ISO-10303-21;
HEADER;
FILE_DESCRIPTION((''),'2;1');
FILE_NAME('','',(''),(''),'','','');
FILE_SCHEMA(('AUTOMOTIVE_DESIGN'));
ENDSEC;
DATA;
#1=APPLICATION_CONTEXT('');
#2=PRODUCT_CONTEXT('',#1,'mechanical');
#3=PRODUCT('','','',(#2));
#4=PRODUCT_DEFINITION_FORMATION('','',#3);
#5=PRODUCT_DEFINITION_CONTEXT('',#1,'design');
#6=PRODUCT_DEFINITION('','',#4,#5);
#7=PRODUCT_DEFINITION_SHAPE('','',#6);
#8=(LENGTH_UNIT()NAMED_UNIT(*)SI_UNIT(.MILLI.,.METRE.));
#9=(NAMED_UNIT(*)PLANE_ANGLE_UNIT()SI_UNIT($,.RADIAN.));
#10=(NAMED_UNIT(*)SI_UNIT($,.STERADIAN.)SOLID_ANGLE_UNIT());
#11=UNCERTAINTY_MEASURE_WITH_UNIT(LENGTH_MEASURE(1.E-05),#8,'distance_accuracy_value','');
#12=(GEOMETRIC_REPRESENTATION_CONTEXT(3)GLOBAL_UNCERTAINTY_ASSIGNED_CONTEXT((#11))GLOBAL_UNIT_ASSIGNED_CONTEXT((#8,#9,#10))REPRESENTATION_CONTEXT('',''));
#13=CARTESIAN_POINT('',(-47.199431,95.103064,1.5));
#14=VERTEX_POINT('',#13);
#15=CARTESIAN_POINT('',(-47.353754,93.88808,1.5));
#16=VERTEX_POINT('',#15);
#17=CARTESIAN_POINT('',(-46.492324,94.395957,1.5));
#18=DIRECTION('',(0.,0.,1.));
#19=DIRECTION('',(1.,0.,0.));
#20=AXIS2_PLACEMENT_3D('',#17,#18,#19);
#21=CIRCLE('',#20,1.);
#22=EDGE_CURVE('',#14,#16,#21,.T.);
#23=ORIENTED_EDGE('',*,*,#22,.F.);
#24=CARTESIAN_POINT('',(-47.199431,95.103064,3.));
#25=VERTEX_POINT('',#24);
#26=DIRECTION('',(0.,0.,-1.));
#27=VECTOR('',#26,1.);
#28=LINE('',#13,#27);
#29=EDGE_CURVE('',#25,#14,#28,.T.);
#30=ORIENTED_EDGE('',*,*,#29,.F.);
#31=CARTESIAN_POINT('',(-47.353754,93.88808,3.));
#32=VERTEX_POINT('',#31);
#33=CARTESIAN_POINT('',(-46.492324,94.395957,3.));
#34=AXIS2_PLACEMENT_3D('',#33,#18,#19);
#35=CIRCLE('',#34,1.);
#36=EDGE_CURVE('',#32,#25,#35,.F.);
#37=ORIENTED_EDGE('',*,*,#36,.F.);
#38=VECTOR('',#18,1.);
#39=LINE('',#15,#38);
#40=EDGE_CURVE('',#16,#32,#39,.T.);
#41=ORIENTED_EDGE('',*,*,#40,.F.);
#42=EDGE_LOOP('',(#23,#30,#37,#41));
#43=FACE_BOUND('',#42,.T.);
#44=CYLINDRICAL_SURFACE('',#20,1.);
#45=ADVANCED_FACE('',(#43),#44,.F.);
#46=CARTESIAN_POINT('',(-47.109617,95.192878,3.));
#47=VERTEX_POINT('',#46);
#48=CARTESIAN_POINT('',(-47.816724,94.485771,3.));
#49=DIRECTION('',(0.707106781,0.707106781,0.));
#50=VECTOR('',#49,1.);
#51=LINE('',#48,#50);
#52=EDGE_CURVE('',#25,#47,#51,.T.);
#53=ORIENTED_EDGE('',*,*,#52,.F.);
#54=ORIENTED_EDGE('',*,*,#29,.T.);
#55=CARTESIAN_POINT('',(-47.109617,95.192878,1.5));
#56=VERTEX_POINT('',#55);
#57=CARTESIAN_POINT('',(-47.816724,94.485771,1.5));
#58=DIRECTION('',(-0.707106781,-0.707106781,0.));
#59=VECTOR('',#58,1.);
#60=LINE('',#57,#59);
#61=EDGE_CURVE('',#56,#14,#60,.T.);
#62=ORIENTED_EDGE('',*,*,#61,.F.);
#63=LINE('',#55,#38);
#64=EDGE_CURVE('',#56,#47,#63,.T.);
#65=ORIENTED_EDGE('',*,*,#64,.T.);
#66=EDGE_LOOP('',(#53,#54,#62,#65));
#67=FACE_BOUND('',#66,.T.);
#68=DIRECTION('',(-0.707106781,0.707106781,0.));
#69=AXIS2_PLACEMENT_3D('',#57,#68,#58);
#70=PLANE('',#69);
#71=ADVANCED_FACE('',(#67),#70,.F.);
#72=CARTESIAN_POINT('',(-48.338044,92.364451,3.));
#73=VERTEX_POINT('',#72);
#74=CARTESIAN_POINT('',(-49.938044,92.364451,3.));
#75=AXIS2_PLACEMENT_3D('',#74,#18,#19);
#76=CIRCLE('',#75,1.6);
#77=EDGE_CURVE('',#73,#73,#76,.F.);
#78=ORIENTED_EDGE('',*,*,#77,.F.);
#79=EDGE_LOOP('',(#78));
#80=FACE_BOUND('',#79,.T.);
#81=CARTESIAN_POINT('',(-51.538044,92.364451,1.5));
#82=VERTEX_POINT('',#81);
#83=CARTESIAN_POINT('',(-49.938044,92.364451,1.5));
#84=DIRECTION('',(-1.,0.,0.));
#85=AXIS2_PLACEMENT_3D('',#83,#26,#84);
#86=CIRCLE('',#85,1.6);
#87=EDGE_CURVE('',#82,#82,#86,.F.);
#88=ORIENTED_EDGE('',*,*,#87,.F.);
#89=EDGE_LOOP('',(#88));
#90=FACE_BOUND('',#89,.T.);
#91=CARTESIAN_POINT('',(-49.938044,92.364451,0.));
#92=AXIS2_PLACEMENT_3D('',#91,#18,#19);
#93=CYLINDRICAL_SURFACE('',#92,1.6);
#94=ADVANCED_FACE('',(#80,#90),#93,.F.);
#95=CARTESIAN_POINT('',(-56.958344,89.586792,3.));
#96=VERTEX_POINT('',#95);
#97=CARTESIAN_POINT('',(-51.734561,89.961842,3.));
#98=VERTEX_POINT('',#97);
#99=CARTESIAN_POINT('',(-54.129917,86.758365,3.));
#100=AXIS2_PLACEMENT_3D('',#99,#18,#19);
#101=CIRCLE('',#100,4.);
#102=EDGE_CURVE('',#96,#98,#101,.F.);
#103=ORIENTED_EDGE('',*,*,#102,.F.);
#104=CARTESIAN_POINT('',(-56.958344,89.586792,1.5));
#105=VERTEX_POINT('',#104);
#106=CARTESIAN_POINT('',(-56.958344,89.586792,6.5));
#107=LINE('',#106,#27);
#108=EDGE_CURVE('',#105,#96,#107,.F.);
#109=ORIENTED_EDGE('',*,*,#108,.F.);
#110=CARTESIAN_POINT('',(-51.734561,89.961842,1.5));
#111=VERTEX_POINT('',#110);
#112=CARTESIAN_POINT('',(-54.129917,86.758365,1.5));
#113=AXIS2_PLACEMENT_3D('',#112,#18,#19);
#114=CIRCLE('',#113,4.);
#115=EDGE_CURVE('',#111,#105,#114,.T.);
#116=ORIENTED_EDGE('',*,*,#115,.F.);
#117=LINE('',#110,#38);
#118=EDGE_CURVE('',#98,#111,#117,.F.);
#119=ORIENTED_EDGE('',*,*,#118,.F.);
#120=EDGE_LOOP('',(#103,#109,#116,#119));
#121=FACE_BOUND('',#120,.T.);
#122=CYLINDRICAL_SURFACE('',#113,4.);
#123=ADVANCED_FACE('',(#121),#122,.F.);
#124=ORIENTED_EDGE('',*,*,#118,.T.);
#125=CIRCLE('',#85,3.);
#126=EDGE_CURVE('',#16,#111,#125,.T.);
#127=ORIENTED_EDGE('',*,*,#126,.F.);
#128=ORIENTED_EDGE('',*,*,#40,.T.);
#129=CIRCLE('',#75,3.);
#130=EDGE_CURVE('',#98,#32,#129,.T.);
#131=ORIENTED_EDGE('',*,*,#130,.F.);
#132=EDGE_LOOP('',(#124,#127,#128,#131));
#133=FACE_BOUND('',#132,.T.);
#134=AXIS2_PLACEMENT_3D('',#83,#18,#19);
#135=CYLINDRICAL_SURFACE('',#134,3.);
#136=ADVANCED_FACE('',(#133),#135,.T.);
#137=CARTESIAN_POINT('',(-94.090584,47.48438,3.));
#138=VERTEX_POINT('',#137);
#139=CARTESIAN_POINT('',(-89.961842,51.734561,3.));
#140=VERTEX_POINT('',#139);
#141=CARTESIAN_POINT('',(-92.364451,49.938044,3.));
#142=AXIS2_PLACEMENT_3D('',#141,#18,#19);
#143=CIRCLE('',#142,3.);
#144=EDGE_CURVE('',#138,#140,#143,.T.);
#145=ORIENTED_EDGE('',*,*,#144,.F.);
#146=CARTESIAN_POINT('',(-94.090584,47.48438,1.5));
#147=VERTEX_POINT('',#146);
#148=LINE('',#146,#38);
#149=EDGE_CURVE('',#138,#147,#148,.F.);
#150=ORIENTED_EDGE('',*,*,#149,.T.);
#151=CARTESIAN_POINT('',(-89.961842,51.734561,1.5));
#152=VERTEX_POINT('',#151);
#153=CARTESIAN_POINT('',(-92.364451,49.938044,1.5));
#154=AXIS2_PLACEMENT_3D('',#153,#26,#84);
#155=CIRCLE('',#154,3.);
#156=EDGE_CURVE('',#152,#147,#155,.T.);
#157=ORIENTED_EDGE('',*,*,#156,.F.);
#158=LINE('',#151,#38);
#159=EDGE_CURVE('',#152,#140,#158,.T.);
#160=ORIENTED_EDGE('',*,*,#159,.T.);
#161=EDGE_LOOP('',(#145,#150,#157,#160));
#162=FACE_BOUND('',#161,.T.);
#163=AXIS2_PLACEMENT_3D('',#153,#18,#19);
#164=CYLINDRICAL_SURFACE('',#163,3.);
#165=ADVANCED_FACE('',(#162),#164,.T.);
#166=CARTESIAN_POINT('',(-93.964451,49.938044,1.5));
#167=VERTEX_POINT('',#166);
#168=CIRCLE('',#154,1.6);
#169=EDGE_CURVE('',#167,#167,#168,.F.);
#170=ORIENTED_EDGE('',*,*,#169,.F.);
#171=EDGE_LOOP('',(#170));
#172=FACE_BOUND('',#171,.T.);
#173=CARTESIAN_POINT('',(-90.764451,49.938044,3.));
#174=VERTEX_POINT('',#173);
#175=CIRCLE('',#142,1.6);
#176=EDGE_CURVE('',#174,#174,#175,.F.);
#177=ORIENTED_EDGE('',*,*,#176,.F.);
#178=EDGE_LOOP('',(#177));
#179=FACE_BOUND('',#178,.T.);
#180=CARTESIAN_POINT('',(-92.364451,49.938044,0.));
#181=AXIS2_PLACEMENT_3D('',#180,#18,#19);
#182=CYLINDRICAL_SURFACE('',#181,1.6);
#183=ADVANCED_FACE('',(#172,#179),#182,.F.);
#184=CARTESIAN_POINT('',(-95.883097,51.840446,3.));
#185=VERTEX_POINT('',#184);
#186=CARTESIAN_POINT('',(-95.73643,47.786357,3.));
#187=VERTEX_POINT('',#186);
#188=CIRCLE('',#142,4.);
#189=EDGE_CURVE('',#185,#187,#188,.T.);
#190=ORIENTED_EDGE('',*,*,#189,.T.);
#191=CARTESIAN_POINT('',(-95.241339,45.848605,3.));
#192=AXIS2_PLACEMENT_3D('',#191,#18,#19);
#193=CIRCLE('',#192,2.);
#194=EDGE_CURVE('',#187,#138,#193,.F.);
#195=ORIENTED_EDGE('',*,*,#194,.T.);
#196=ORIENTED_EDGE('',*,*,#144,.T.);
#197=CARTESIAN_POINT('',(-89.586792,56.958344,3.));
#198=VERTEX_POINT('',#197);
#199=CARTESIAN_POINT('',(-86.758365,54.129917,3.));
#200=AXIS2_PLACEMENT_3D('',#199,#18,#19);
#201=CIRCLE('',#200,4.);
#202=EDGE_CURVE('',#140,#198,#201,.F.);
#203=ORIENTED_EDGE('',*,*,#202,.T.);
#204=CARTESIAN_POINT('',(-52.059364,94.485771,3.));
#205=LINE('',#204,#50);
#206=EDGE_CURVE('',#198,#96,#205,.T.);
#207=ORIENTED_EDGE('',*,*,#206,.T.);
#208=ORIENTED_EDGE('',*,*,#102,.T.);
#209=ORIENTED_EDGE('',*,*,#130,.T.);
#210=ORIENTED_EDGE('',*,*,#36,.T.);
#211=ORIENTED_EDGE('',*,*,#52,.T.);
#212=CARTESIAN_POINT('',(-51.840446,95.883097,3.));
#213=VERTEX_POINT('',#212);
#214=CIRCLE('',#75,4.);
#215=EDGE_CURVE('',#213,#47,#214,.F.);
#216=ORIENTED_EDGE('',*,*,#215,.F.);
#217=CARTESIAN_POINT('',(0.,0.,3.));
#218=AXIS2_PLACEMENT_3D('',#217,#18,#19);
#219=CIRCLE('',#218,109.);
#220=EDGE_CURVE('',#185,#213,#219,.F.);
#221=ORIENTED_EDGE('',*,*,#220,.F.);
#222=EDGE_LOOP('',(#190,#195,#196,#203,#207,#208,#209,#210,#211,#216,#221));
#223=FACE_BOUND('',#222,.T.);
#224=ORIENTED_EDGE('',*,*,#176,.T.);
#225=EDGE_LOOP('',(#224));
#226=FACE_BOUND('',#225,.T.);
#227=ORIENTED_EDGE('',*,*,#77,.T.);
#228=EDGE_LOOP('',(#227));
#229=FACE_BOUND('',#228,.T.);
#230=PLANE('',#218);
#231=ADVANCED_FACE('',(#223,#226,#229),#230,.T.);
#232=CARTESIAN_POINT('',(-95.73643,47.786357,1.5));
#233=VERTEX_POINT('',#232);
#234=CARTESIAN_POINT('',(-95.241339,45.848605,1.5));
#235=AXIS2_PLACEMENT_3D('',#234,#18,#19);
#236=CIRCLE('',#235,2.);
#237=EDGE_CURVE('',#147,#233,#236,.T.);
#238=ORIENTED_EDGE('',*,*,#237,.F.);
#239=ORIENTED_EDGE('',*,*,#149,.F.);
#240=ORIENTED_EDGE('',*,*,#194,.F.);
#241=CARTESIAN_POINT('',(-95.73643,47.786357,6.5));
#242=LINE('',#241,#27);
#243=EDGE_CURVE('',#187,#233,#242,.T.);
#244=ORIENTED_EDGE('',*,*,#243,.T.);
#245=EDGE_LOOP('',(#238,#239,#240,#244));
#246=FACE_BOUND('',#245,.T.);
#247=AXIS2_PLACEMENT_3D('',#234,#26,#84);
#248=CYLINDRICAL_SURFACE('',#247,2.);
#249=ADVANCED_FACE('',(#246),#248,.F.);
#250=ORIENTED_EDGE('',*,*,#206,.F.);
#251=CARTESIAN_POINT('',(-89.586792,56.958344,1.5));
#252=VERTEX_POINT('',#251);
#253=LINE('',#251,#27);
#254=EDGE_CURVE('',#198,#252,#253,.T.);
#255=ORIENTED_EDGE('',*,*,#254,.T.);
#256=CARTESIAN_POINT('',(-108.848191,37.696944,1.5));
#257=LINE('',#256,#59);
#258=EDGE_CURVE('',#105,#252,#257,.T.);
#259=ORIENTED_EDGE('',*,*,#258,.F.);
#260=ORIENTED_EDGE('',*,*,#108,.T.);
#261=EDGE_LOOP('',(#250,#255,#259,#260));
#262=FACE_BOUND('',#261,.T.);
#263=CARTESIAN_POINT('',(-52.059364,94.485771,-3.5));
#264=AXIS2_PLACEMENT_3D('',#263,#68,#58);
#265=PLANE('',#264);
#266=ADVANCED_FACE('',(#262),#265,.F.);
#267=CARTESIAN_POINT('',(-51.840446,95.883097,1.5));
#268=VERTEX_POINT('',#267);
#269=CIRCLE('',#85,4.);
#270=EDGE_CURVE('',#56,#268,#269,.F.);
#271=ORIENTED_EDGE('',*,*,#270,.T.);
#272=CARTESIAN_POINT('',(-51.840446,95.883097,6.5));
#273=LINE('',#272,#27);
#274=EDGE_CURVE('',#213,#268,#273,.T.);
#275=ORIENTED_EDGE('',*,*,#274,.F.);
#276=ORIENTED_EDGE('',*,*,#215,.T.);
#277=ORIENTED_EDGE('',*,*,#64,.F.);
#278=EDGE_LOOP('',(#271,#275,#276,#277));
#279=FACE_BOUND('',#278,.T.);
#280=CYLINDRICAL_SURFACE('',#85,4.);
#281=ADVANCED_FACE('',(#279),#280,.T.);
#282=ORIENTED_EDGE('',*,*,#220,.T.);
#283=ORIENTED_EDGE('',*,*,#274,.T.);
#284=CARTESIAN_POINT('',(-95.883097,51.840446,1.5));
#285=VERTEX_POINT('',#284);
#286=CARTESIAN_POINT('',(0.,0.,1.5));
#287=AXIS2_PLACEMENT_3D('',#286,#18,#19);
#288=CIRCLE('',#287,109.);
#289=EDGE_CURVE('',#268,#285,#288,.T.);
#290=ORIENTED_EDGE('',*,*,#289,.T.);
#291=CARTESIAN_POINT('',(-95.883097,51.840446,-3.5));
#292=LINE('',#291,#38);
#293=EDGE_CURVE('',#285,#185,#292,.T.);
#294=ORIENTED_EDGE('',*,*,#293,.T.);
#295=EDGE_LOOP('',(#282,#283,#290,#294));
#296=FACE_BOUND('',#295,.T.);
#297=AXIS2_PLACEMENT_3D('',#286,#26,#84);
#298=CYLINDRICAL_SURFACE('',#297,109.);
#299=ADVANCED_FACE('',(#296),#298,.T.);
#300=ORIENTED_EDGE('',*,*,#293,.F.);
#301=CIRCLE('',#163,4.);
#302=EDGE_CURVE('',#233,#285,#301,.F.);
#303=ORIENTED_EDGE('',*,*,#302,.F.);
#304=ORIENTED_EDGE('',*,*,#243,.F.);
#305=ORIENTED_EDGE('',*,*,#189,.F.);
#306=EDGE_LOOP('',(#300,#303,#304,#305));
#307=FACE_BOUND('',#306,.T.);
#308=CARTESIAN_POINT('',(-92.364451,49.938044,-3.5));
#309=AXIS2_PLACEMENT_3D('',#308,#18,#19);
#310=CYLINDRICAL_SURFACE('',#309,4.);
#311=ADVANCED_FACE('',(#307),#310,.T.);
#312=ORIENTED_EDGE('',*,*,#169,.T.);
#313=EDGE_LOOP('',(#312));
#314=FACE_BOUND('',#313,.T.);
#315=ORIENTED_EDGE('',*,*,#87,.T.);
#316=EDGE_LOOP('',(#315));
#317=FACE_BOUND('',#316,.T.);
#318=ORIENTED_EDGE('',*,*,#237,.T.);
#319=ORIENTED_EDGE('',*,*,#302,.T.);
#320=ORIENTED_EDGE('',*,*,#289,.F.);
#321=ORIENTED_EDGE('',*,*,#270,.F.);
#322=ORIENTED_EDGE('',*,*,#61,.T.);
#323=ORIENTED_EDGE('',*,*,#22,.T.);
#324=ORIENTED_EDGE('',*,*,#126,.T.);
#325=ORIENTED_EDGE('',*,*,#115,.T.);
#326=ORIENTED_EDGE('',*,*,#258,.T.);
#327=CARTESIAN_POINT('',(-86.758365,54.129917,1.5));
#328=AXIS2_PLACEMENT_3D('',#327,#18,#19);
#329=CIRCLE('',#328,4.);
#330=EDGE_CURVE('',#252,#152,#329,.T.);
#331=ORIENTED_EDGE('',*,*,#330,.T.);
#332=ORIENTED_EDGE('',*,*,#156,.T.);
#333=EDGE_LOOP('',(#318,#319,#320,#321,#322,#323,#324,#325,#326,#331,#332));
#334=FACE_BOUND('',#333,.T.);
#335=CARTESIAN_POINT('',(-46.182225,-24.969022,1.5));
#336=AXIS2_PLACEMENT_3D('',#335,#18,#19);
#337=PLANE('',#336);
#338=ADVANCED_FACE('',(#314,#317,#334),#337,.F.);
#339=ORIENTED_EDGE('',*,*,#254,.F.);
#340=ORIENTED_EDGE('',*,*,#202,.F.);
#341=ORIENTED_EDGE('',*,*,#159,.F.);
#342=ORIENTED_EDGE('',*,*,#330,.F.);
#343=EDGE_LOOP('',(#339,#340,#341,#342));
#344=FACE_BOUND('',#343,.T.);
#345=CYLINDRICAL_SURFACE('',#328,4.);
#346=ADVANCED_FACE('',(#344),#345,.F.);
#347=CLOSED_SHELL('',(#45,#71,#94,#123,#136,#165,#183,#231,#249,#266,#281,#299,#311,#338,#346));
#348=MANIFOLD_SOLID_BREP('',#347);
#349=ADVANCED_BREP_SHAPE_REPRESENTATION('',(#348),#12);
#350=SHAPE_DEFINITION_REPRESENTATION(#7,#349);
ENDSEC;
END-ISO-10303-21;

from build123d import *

# Parameters (mm, degrees)
FILLET1_OUTLINE_R    = 1.6
FILLET1_OUTLINE_R_2  = 1.4
FILLET1_DEPTH        = 1.5
FILLET2_R            = 1
FILLET3_R            = 4
FILLET6_R            = 1
FILLET7_R            = 1
FILLET8_R            = 2
BOSS_EXTRUDE1_DEPTH  = 1.5
FILLET9_R            = 4
BOSS_EXTRUDE2_START  = -1.5
SKETCH2_R            = 1.6
BOSS_EXTRUDE2_DEPTH  = 1.5
BOSS_EXTRUDE3_START  = -1.5
SKETCH3_R            = 1.6
BOSS_EXTRUDE3_DEPTH  = 1.5
CUT_EXTRUDE1_START   = -1.5
SKETCH4_R            = 1.6
CUT_EXTRUDE1_DEPTH   = 1.5
CUT_EXTRUDE3_DEPTH   = 10
FILLET10_R           = 2
SKETCH6_R            = 61
CUT_EXTRUDE4_DEPTH   = 10
CUT_EXTRUDE5_DEPTH   = 10
FILLET12_R           = 1
SKETCH8_R            = 1.6
BOSS_EXTRUDE5_DEPTH  = 5
CUT_EXTRUDE6_START   = -5
CUT_EXTRUDE6_DEPTH   = 5
SKETCH10_R           = 133.204065673
CUT_EXTRUDE7_DEPTH   = 1.5
FILLET13_R           = 1
FILLET14_R           = 2
CUT_EXTRUDE10_START  = -10
CUT_EXTRUDE10_DEPTH  = 10
BOSS_EXTRUDE10_DEPTH = 5
FILLET15_START       = 1
FILLET15_DEPTH       = 6
CUT_EXTRUDE13_START  = -10
CUT_EXTRUDE13_DEPTH  = 10
FILLET16_R           = 4
SKETCH14_R           = 214.053179588
CUT_EXTRUDE14_DEPTH  = 3.5


with BuildPart() as part:
    # Fillet1: read off the stored shape, not the designer's step
    # Fillet1 outline → Fillet1 (new body)
    with BuildSketch(Plane.XY):
        with BuildLine():
            Line((-52.766471043, 89.536023665), (-42.779960262, 79.549512884))
            Line((-42.779960262, 79.549512884), (-79.549512883, 42.779960262))
            Line((-79.549512883, 42.779960262), (-89.536023665, 52.766471043))
            ThreePointArc((-89.536023665, 52.766471043), (-92.941929118, 53.896139266), (-95.883096534, 51.840445591))
            ThreePointArc((-95.883096534, 51.840445591), (-109, 0), (-95.883096534, -51.840445591))
            ThreePointArc((-95.883096534, -51.840445591), (-92.941929118, -53.896139266), (-89.536023665, -52.766471043))
            Line((-89.536023665, -52.766471043), (-79.549512883, -42.779960262))
            Line((-79.549512883, -42.779960262), (-42.779960262, -79.549512883))
            Line((-42.779960262, -79.549512883), (-52.766471043, -89.536023665))
            ThreePointArc((-52.766471043, -89.536023665), (-53.896139266, -92.941929118), (-51.840445591, -95.883096534))
            ThreePointArc((-51.840445591, -95.883096534), (-50.184016899, -96.760345431), (-48.512748328, -97.608981399))
            ThreePointArc((-48.512748328, -97.608981399), (-47.646815155, -97.921093641), (-46.732463985, -98.02700043))
            Line((-46.732463985, -98.02700043), (46.732463985, -98.02700043))
            ThreePointArc((46.732463985, -98.02700043), (47.646815155, -97.921093641), (48.512748328, -97.608981399))
            ThreePointArc((48.512748328, -97.608981399), (50.184016899, -96.760345431), (51.840445591, -95.883096534))
            ThreePointArc((51.840445591, -95.883096534), (53.896139266, -92.941929118), (52.766471043, -89.536023665))
            Line((52.766471043, -89.536023665), (42.779960262, -79.549512884))
            Line((42.779960262, -79.549512884), (79.549512884, -42.779960262))
            Line((79.549512884, -42.779960262), (89.536023665, -52.766471043))
            ThreePointArc((89.536023665, -52.766471043), (92.941929118, -53.896139266), (95.883096534, -51.840445591))
            ThreePointArc((95.883096534, -51.840445591), (109, 0), (95.883096534, 51.840445591))
            ThreePointArc((95.883096534, 51.840445591), (92.941929118, 53.896139266), (89.536023665, 52.766471043))
            Line((89.536023665, 52.766471043), (79.549512883, 42.779960262))
            Line((79.549512883, 42.779960262), (42.779960262, 79.549512884))
            Line((42.779960262, 79.549512884), (52.766471043, 89.536023665))
            ThreePointArc((52.766471043, 89.536023665), (53.896139266, 92.941929118), (51.840445591, 95.883096534))
            ThreePointArc((51.840445591, 95.883096534), (51.446125895, 96.095245098), (51.050938033, 96.305772029))
            Line((51.050938033, 96.305772029), (31.745166004, 77))
            Line((31.745166004, 77), (-31.745166004, 77))
            Line((-31.745166004, 77), (-51.050938033, 96.305772029))
            ThreePointArc((-51.050938033, 96.305772029), (-51.446125895, 96.095245098), (-51.840445591, 95.883096534))
            ThreePointArc((-51.840445591, 95.883096534), (-53.896139266, 92.941929118), (-52.766471043, 89.536023665))
        make_face()
        with Locations((-92.27579683, -50.101669827)):
            Circle(FILLET1_OUTLINE_R, mode=Mode.SUBTRACT)
        with Locations((-50.101669828, -92.275796829)):
            Circle(FILLET1_OUTLINE_R, mode=Mode.SUBTRACT)
        with BuildLine():
            Line((-27.999999998, -90.02700043), (-41.861882029, -90.02700043))
            Line((-41.861882029, -90.02700043), (-37.123106012, -85.206367133))
            ThreePointArc((-37.123106012, -85.206367133), (-34.779960262, -79.549512884), (-37.123106012, -73.892658634))
            Line((-37.123106012, -73.892658634), (-44.194173825, -66.821590821))
            Line((-44.194173825, -66.821590821), (-35.419577284, -58.046994281))
            ThreePointArc((-35.419577284, -58.046994281), (-31.770328056, -60.12192824), (-27.999999998, -61.96773354))
            Line((-27.999999998, -61.96773354), (-27.999999998, -90.02700043))
        make_face(mode=Mode.SUBTRACT)
        with Locations((-23.999999998, -90)):
            Circle(FILLET1_OUTLINE_R, mode=Mode.SUBTRACT)
        with Locations((-46.492270863, -64.877047174)):
            Circle(FILLET1_OUTLINE_R_2, mode=Mode.SUBTRACT)
        with BuildLine():
            Line((-40.489419991, -54.631555614), (-48.436814511, -62.578950135))
            Line((-48.436814511, -62.578950135), (-62.479030953, -48.536733693))
            Line((-62.479030953, -48.536733693), (-54.492060142, -40.676963769))
            ThreePointArc((-54.492060142, -40.676963769), (-48.000552605, -48.165827612), (-40.489419991, -54.631555614))
        make_face(mode=Mode.SUBTRACT)
        with Locations((-40.835416614, -59.220192924)):
            Circle(FILLET1_OUTLINE_R_2, mode=Mode.SUBTRACT)
        with Locations((-64.877047174, -46.492270863)):
            Circle(FILLET1_OUTLINE_R_2, mode=Mode.SUBTRACT)
        with Locations((-59.220192925, -40.835416614)):
            Circle(FILLET1_OUTLINE_R_2, mode=Mode.SUBTRACT)
        with BuildLine():
            ThreePointArc((-73.892658634, -37.123106012), (-79.549512884, -34.779960262), (-85.206367133, -37.123106012))
            ThreePointArc((-85.206367133, -37.123106012), (-88.293174595, -40.113953283), (-91.303559052, -43.1817103))
            ThreePointArc((-91.303559052, -43.1817103), (-94.614957198, -35.341333794), (-97.254498611, -27.25))
            Line((-97.254498611, -27.25), (-62.301183777, -27.25))
            ThreePointArc((-62.301183777, -27.25), (-60.218013119, -31.58782829), (-57.833278956, -35.767469092))
            Line((-57.833278956, -35.767469092), (-66.690457063, -44.325307583))
            Line((-66.690457063, -44.325307583), (-73.892658634, -37.123106012))
        make_face(mode=Mode.SUBTRACT)
        with Locations((-98, -23.25)):
            Circle(FILLET1_OUTLINE_R, mode=Mode.SUBTRACT)
        with Locations((-68.5, -23.25)):
            Circle(FILLET1_OUTLINE_R, mode=Mode.SUBTRACT)
        with Locations((23.999999998, -90)):
            Circle(FILLET1_OUTLINE_R, mode=Mode.SUBTRACT)
        with Locations((50.101669827, -92.275796829)):
            Circle(FILLET1_OUTLINE_R, mode=Mode.SUBTRACT)
        with BuildLine():
            ThreePointArc((28, -61.967733539), (31.770328056, -60.121928239), (35.419577283, -58.046994281))
            Line((35.419577283, -58.046994281), (44.194173824, -66.821590822))
            Line((44.194173824, -66.821590822), (37.123106012, -73.892658634))
            ThreePointArc((37.123106012, -73.892658634), (34.779960262, -79.549512884), (37.123106012, -85.206367133))
            ThreePointArc((37.123106012, -85.206367133), (39.468585064, -87.64018675), (41.861882029, -90.02700043))
            Line((41.861882029, -90.02700043), (28, -90.02700043))
            Line((28, -90.02700043), (28, -61.967733539))
        make_face(mode=Mode.SUBTRACT)
        with Locations((46.492270863, -64.877047174)):
            Circle(FILLET1_OUTLINE_R_2, mode=Mode.SUBTRACT)
        with Locations((40.835416614, -59.220192924)):
            Circle(FILLET1_OUTLINE_R_2, mode=Mode.SUBTRACT)
        with BuildLine():
            Line((62.479030953, -48.536733693), (48.436814511, -62.578950135))
            Line((48.436814511, -62.578950135), (40.489419991, -54.631555614))
            ThreePointArc((40.489419991, -54.631555614), (48.000552605, -48.165827612), (54.492060142, -40.676963769))
            Line((54.492060142, -40.676963769), (62.479030953, -48.536733693))
        make_face(mode=Mode.SUBTRACT)
        with Locations((92.27579683, -50.101669827)):
            Circle(FILLET1_OUTLINE_R, mode=Mode.SUBTRACT)
        with BuildLine():
            ThreePointArc((-20, -56.568542495), (0, 60), (20, -56.568542495))
            Line((20, -56.568542495), (20, -94.013500215))
            Line((20, -94.013500215), (-4e-09, -94.02700043))
            Line((-4e-09, -94.02700043), (-20, -94.013500215))
            Line((-20, -94.013500215), (-20, -56.568542495))
        make_face(mode=Mode.SUBTRACT)
        with Locations((64.877047174, -46.492270863)):
            Circle(FILLET1_OUTLINE_R_2, mode=Mode.SUBTRACT)
        with Locations((59.220192924, -40.835416614)):
            Circle(FILLET1_OUTLINE_R_2, mode=Mode.SUBTRACT)
        with BuildLine():
            Line((62.301183777, -27.25), (97.254498611, -27.25))
            ThreePointArc((97.254498611, -27.25), (94.614957198, -35.341333794), (91.303559052, -43.1817103))
            ThreePointArc((91.303559052, -43.1817103), (88.293174595, -40.113953283), (85.206367133, -37.123106012))
            ThreePointArc((85.206367133, -37.123106012), (79.549512884, -34.779960262), (73.892658634, -37.123106012))
            Line((73.892658634, -37.123106012), (66.690457063, -44.325307584))
            Line((66.690457063, -44.325307584), (57.833278956, -35.767469092))
            ThreePointArc((57.833278956, -35.767469092), (60.218013119, -31.58782829), (62.301183777, -27.25))
        make_face(mode=Mode.SUBTRACT)
        with Locations((68.5, -23.25)):
            Circle(FILLET1_OUTLINE_R, mode=Mode.SUBTRACT)
        with Locations((98, -23.25)):
            Circle(FILLET1_OUTLINE_R, mode=Mode.SUBTRACT)
        with BuildLine():
            ThreePointArc((-99.148562773, -19.25), (-101, 0), (-99.148562773, 19.25))
            Line((-99.148562773, 19.25), (-65.218383145, 19.25))
            ThreePointArc((-65.218383145, 19.25), (-68, 0), (-65.218383145, -19.25))
            Line((-65.218383145, -19.25), (-99.148562773, -19.25))
        make_face(mode=Mode.SUBTRACT)
        with Locations((-98, 23.25)):
            Circle(FILLET1_OUTLINE_R, mode=Mode.SUBTRACT)
        with Locations((-64, 0)):
            Circle(FILLET1_OUTLINE_R, mode=Mode.SUBTRACT)
        with Locations((-68.5, 23.25)):
            Circle(FILLET1_OUTLINE_R, mode=Mode.SUBTRACT)
        with BuildLine():
            Line((-62.301183777, 27.25), (-97.254498611, 27.25))
            ThreePointArc((-97.254498611, 27.25), (-94.614957198, 35.341333794), (-91.303559052, 43.1817103))
            ThreePointArc((-91.303559052, 43.1817103), (-88.293174595, 40.113953283), (-85.206367133, 37.123106012))
            ThreePointArc((-85.206367133, 37.123106012), (-79.549512884, 34.779960262), (-73.892658634, 37.123106012))
            Line((-73.892658634, 37.123106012), (-66.690457063, 44.325307584))
            Line((-66.690457063, 44.325307584), (-57.833278956, 35.767469092))
            ThreePointArc((-57.833278956, 35.767469092), (-60.218013119, 31.58782829), (-62.301183777, 27.25))
        make_face(mode=Mode.SUBTRACT)
        with Locations((-59.220192925, 40.835416614)):
            Circle(FILLET1_OUTLINE_R_2, mode=Mode.SUBTRACT)
        with Locations((-64.877047174, 46.492270863)):
            Circle(FILLET1_OUTLINE_R_2, mode=Mode.SUBTRACT)
        with Locations((-92.27579683, 50.101669827)):
            Circle(FILLET1_OUTLINE_R, mode=Mode.SUBTRACT)
        with BuildLine():
            ThreePointArc((-40.489419991, 54.631555614), (-48.000552605, 48.165827612), (-54.492060142, 40.676963769))
            Line((-54.492060142, 40.676963769), (-62.479030953, 48.536733693))
            Line((-62.479030953, 48.536733693), (-48.436814511, 62.578950135))
            Line((-48.436814511, 62.578950135), (-40.489419991, 54.631555614))
        make_face(mode=Mode.SUBTRACT)
        with Locations((-40.835416614, 59.220192924)):
            Circle(FILLET1_OUTLINE_R_2, mode=Mode.SUBTRACT)
        with Locations((-46.492270863, 64.877047174)):
            Circle(FILLET1_OUTLINE_R_2, mode=Mode.SUBTRACT)
        with BuildLine():
            Line((-44.194173824, 66.821590822), (-40.015764646, 71))
            Line((-40.015764646, 71), (-31.745166004, 71))
            Line((-31.745166004, 71), (-18.99999793, 70.951058904))
            Line((-18.99999793, 70.951058904), (-18.999992628, 68.264642036))
            Line((-18.999992628, 68.264642036), (-19.01142159, 65.288328583))
            ThreePointArc((-19.01142159, 65.288328583), (-27.455284376, 62.210990667), (-35.419577283, 58.046994281))
            Line((-35.419577283, 58.046994281), (-44.194173824, 66.821590822))
        make_face(mode=Mode.SUBTRACT)
        with Locations((-15, 66.122776602)):
            Circle(FILLET1_OUTLINE_R, mode=Mode.SUBTRACT)
        with Locations((-36.042175759, 77.089910724)):
            Circle(FILLET1_OUTLINE_R, mode=Mode.SUBTRACT)
        with Locations((-51.089613767, 91.732498958)):
            Circle(FILLET1_OUTLINE_R, mode=Mode.SUBTRACT)
        with Locations((64, 0)):
            Circle(FILLET1_OUTLINE_R, mode=Mode.SUBTRACT)
        with Locations((68.5, 23.25)):
            Circle(FILLET1_OUTLINE_R, mode=Mode.SUBTRACT)
        with BuildLine():
            ThreePointArc((99.148562773, 19.25), (101, 0), (99.148562773, -19.25))
            Line((99.148562773, -19.25), (65.218383145, -19.25))
            ThreePointArc((65.218383145, -19.25), (68, 0), (65.218383145, 19.25))
            Line((65.218383145, 19.25), (99.148562773, 19.25))
        make_face(mode=Mode.SUBTRACT)
        with Locations((98, 23.25)):
            Circle(FILLET1_OUTLINE_R, mode=Mode.SUBTRACT)
        with Locations((59.220192924, 40.835416614)):
            Circle(FILLET1_OUTLINE_R_2, mode=Mode.SUBTRACT)
        with Locations((64.877047174, 46.492270863)):
            Circle(FILLET1_OUTLINE_R_2, mode=Mode.SUBTRACT)
        with BuildLine():
            ThreePointArc((73.892658634, 37.123106012), (79.549512884, 34.779960262), (85.206367133, 37.123106012))
            ThreePointArc((85.206367133, 37.123106012), (88.293174595, 40.113953283), (91.303559052, 43.1817103))
            ThreePointArc((91.303559052, 43.1817103), (94.614957198, 35.341333794), (97.254498611, 27.25))
            Line((97.254498611, 27.25), (62.301183777, 27.25))
            ThreePointArc((62.301183777, 27.25), (60.218013119, 31.58782829), (57.833278956, 35.767469092))
            Line((57.833278956, 35.767469092), (66.690457063, 44.325307583))
            Line((66.690457063, 44.325307583), (73.892658634, 37.123106012))
        make_face(mode=Mode.SUBTRACT)
        with Locations((0, 64)):
            Circle(FILLET1_OUTLINE_R, mode=Mode.SUBTRACT)
        with BuildLine():
            Line((-11, 67.104396279), (-11, 70.930497512))
            Line((-11, 70.930497512), (0, 71))
            Line((0, 71), (11, 71))
            Line((11, 71), (11, 67.104396279))
            ThreePointArc((11, 67.104396279), (0, 68), (-11, 67.104396279))
        make_face(mode=Mode.SUBTRACT)
        with Locations((15, 66.122776602)):
            Circle(FILLET1_OUTLINE_R, mode=Mode.SUBTRACT)
        with Locations((40.835416614, 59.220192924)):
            Circle(FILLET1_OUTLINE_R_2, mode=Mode.SUBTRACT)
        with BuildLine():
            ThreePointArc((54.492060142, 40.676963769), (48.000552606, 48.165827612), (40.489419991, 54.631555614))
            Line((40.489419991, 54.631555614), (48.436814511, 62.578950135))
            Line((48.436814511, 62.578950135), (62.479030953, 48.536733693))
            Line((62.479030953, 48.536733693), (54.492060142, 40.676963769))
        make_face(mode=Mode.SUBTRACT)
        with BuildLine():
            Line((19.012475672, 65.288021634), (18.990729901, 70.951023316))
            Line((18.990729901, 70.951023316), (31.745166003, 71))
            Line((31.745166003, 71), (40.015764645, 71))
            Line((40.015764645, 71), (44.194173823, 66.821590822))
            Line((44.194173823, 66.821590822), (35.419577282, 58.046994281))
            ThreePointArc((35.419577282, 58.046994281), (27.455786576, 62.210769032), (19.012475672, 65.288021634))
        make_face(mode=Mode.SUBTRACT)
        with Locations((46.492270863, 64.877047174)):
            Circle(FILLET1_OUTLINE_R_2, mode=Mode.SUBTRACT)
        with Locations((36.042175759, 77.089910724)):
            Circle(FILLET1_OUTLINE_R, mode=Mode.SUBTRACT)
        with Locations((51.089613767, 91.732498958)):
            Circle(FILLET1_OUTLINE_R, mode=Mode.SUBTRACT)
        with Locations((92.27579683, 50.101669827)):
            Circle(FILLET1_OUTLINE_R, mode=Mode.SUBTRACT)
    extrude(amount=FILLET1_DEPTH)

    # Fillet2
    fillet2_edges = [part.edges().sort_by_distance(p)[0] for p in [
        (-51.050938033, 96.305772029, 0.75),
        (51.050938033, 96.305772029, 0.75),
    ]]
    fillet(fillet2_edges, radius=FILLET2_R)

    # Fillet3
    fillet3_edges = [part.edges().sort_by_distance(p)[0] for p in [
        (-31.745166004, 77, 0.75),
        (31.745166004, 77, 0.75),
    ]]
    fillet(fillet3_edges, radius=FILLET3_R)

    # Fillet6
    fillet6_edges = [part.edges().sort_by_distance(p)[0] for p in [
        (-48.436814511, 62.578950135, 0.75),
        (-40.489419991, 54.631555614, 0.75),
        (-62.479030953, 48.536733693, 0.75),
        (-54.492060142, 40.676963769, 0.75),
        (-44.194173824, 66.821590822, 0.75),
        (-40.015764646, 71, 0.75),
        (-35.419577283, 58.046994281, 0.75),
        (-19.01142159, 65.288328583, 0.75),
        (-18.99999793, 70.951058904, 0.75),
        (-31.745166004, 71, 0.75),
        (-57.833278956, 35.767469092, 0.75),
        (-66.690457063, 44.325307584, 0.75),
        (19.012475672, 65.288021634, 0.75),
        (18.990729901, 70.951023316, 0.75),
        (35.419577282, 58.046994281, 0.75),
        (44.194173823, 66.821590822, 0.75),
        (40.015764645, 71, 0.75),
        (31.745166003, 71, 0.75),
        (54.492060142, 40.676963769, 0.75),
        (40.489419991, 54.631555614, 0.75),
        (62.479030953, 48.536733693, 0.75),
        (48.436814511, 62.578950135, 0.75),
        (-11, 67.104396279, 0.75),
        (-11, 70.930497512, 0.75),
        (11, 67.104396279, 0.75),
        (11, 71, 0.75),
    ]]
    fillet(fillet6_edges, radius=FILLET6_R)

    # Fillet7
    fillet7_edges = [part.edges().sort_by_distance(p)[0] for p in [
        (40.489419991, -54.631555614, 0.75),
        (54.492060142, -40.676963769, 0.75),
        (48.436814511, -62.578950135, 0.75),
        (62.479030953, -48.536733693, 0.75),
        (-54.492060142, -40.676963769, 0.75),
        (-40.489419991, -54.631555614, 0.75),
        (-62.479030953, -48.536733693, 0.75),
        (-48.436814511, -62.578950135, 0.75),
        (66.690457063, 44.325307583, 0.75),
        (57.833278956, 35.767469092, 0.75),
        (62.301183777, 27.25, 0.75),
        (97.254498611, 27.25, 0.75),
        (91.303559052, 43.1817103, 0.75),
        (-99.148562773, 19.25, 0.75),
        (-99.148562773, -19.25, 0.75),
        (-65.218383145, -19.25, 0.75),
        (-65.218383145, 19.25, 0.75),
        (-66.690457063, -44.325307583, 0.75),
        (-57.833278956, -35.767469092, 0.75),
        (-62.301183777, -27.25, 0.75),
        (-97.254498611, -27.25, 0.75),
        (-91.303559052, -43.1817103, 0.75),
        (-62.301183777, 27.25, 0.75),
        (-97.254498611, 27.25, 0.75),
        (-91.303559052, 43.1817103, 0.75),
        (62.301183777, -27.25, 0.75),
        (97.254498611, -27.25, 0.75),
        (57.833278956, -35.767469092, 0.75),
        (66.690457063, -44.325307584, 0.75),
        (91.303559052, -43.1817103, 0.75),
        (99.148562773, -19.25, 0.75),
        (99.148562773, 19.25, 0.75),
        (65.218383145, 19.25, 0.75),
        (65.218383145, -19.25, 0.75),
        (28, -61.967733539, 0.75),
        (35.419577283, -58.046994281, 0.75),
        (28, -90.02700043, 0.75),
        (41.861882029, -90.02700043, 0.75),
        (44.194173824, -66.821590822, 0.75),
        (-41.861882029, -90.02700043, 0.75),
        (-27.999999998, -90.02700043, 0.75),
        (-27.999999998, -61.96773354, 0.75),
        (-35.419577284, -58.046994281, 0.75),
        (-44.194173825, -66.821590821, 0.75),
    ]]
    fillet(fillet7_edges, radius=FILLET7_R)

    # Fillet8
    fillet8_edges = [part.edges().sort_by_distance(p)[0] for p in [
        (20, -56.568542495, 0.75),
        (-20, -56.568542495, 0.75),
        (-20, -94.013500215, 0.75),
        (20, -94.013500215, 0.75),
        (-42.779960262, 79.549512884, 0.75),
        (42.779960262, 79.549512884, 0.75),
        (79.549512883, 42.779960262, 0.75),
        (79.549512884, -42.779960262, 0.75),
        (42.779960262, -79.549512884, 0.75),
        (-42.779960262, -79.549512883, 0.75),
        (-79.549512883, -42.779960262, 0.75),
        (-79.549512883, 42.779960262, 0.75),
    ]]
    fillet(fillet8_edges, radius=FILLET8_R)

    # Sketch1 → Boss-Extrude1 (add)
    with BuildSketch(Plane.XY.offset(1.5)):
        Polygon((51.840445591, 95.883096534), (49.820140502, 97.903401623), (28.916738879, 77), (30.937043968, 74.979694911), align=None)
        Polygon((-30.937043968, 74.979694911), (-51.840445591, 95.883096534), (-49.820140502, 97.903401623), (-28.916738879, 77), align=None)
    extrude(amount=-BOSS_EXTRUDE1_DEPTH)

    # Fillet9
    # the kernel refuses this fillet: 4 mm, written as the material it takes off along each edge
    with BuildSketch(Plane(origin=(49.820140502, 97.903401623, 11.083148475), x_dir=(-0.7071067811865457, -0.7071067811865495, 0), z_dir=(0, 0, -1))) as fillet9_piece_1:
        with BuildLine():
            CenterArc((3.83325939, -4), FILLET9_R, 90, 73.398450397)
            Line((0, -2.857142857), (-0.076665188, -2.834285714))
            ThreePointArc((-0.076665188, -2.834285714), (-0.08, -1.428571428), (-0.08, 0))
            Line((-0.08, 0), (0, 0.08))
            Line((0, 0.08), (3.83325939, 0.08))
            Line((3.83325939, 0.08), (3.83325939, 0))
        make_face()
    extrude(amount=20.66629695, mode=Mode.SUBTRACT)
    with BuildSketch(Plane(origin=(-49.820140502, 97.903401623, 11.083148475), x_dir=(-0.7071067811734814, -0.7071067811996137, 0), z_dir=(0, 0, -1))) as fillet9_piece_2:
        with BuildLine():
            CenterArc((4, -3.83325939), FILLET9_R, 106.601549604, 73.398450397)
            Line((0, -3.83325939), (-0.08, -3.83325939))
            Line((-0.08, -3.83325939), (-0.08, 0))
            Line((-0.08, 0), (0, 0.08))
            ThreePointArc((0, 0.08), (1.428571428, 0.08), (2.834285714, 0.076665188))
            Line((2.834285714, 0.076665188), (2.857142857, 0))
        make_face()
    extrude(amount=20.66629695, mode=Mode.SUBTRACT)

    # Sketch2 → Boss-Extrude2 (add)
    with BuildSketch(Plane.XY.offset(1.5).offset(BOSS_EXTRUDE2_START)):
        with Locations((51.089613767, 91.732498958)):
            Circle(SKETCH2_R)
    extrude(amount=BOSS_EXTRUDE2_DEPTH)

    # Sketch3 → Boss-Extrude3 (add)
    with BuildSketch(Plane.XY.offset(1.5).offset(BOSS_EXTRUDE3_START)):
        with Locations((-92.27579683, 50.101669827)):
            Circle(SKETCH3_R)
        with Locations((-92.27579683, -50.101669827)):
            Circle(SKETCH3_R)
        with Locations((92.364450789, 49.938043918)):
            Circle(SKETCH3_R)
        with Locations((-50.101669828, -92.275796829)):
            Circle(SKETCH3_R)
        with Locations((50.101669827, -92.275796829)):
            Circle(SKETCH3_R)
        with Locations((92.27579683, -50.101669827)):
            Circle(SKETCH3_R)
        with Locations((-51.089613767, 91.732498958)):
            Circle(SKETCH3_R)
    extrude(amount=BOSS_EXTRUDE3_DEPTH)

    # Sketch4 → Cut-Extrude1 (cut)
    with BuildSketch(Plane.XY.offset(1.5).offset(CUT_EXTRUDE1_START)):
        with Locations((92.364450789, 49.938043918)):
            Circle(SKETCH4_R)
        with Locations((49.938043918, 92.364450789)):
            Circle(SKETCH4_R)
        with Locations((-92.364450789, 49.938043918)):
            Circle(SKETCH4_R)
        with Locations(Location((-49.938043918, 92.364450789, 0), (0, 0, 180))):
            Circle(SKETCH4_R)
        with Locations(Location((-92.364450789, -49.938043918, 0), (0, 0, 180))):
            Circle(SKETCH4_R)
        with Locations((-49.938043918, -92.364450789)):
            Circle(SKETCH4_R)
        with Locations(Location((49.938043918, -92.364450789, 0), (0, 0, 180))):
            Circle(SKETCH4_R)
        with Locations((92.364450789, -49.938043918)):
            Circle(SKETCH4_R)
    extrude(amount=CUT_EXTRUDE1_DEPTH, mode=Mode.SUBTRACT)

    # Sketch5 → Cut-Extrude3 (cut)
    with BuildSketch(Plane.XY.offset(1.5)):
        Polygon((41.365746702, 78.135299324), (78.135299324, 41.365746702), (85.249875055, 48.480322434), (48.480322433, 85.249875055), align=None)
        Polygon((-48.480322433, 85.249875055), (-85.249875055, 48.480322434), (-78.135299324, 41.365746702), (-41.365746702, 78.135299324), align=None)
        Polygon((-41.365746702, -78.135299324), (-78.135299324, -41.365746702), (-85.249875055, -48.480322433), (-48.480322433, -85.249875055), align=None)
        Polygon((48.480322433, -85.249875055), (85.249875055, -48.480322433), (78.135299324, -41.365746702), (41.365746702, -78.135299324), align=None)
    extrude(amount=-CUT_EXTRUDE3_DEPTH, mode=Mode.SUBTRACT)

    # Fillet10
    fillet10_edges = [part.edges().sort_by_distance(p)[0] for p in [
        (-41.365746702, 78.135299324, 0.75),
        (-78.135299324, 41.365746702, 0.75),
        (78.135299324, 41.365746702, 0.75),
        (41.365746702, 78.135299324, 0.75),
        (-78.135299324, -41.365746702, 0.75),
        (-41.365746702, -78.135299324, 0.75),
        (41.365746702, -78.135299324, 0.75),
        (78.135299324, -41.365746702, 0.75),
    ]]
    fillet(fillet10_edges, radius=FILLET10_R)

    # Sketch6 → Cut-Extrude4 (cut)
    with BuildSketch(Plane.XY.offset(1.5)):
        Circle(SKETCH6_R)
    extrude(amount=-CUT_EXTRUDE4_DEPTH, mode=Mode.SUBTRACT)

    # Sketch7 → Cut-Extrude5 (cut)
    with BuildSketch(Plane.XY.offset(1.5)):
        Polygon((-21, -74.990178383), (-21, -49.799253287), (21, -49.799253287), (21, -74.990178383), (21, -95.02700043), (0, -95.02700043), (-21, -95.02700043), align=None)
    extrude(amount=-CUT_EXTRUDE5_DEPTH, mode=Mode.SUBTRACT)

    # Fillet12
    fillet12_edges = [part.edges().sort_by_distance(p)[0] for p in [
        (21, -57.271284253, 0.75),
        (-21, -57.271284253, 0.75),
        (21, -95.02700043, 0.75),
        (-21, -95.02700043, 0.75),
    ]]
    fillet(fillet12_edges, radius=FILLET12_R)

    # Sketch8 → Boss-Extrude5 (add)
    with BuildSketch(Plane.XY.offset(1.5)):
        with BuildLine():
            ThreePointArc((-51.840445591, -95.883096534), (-46.514100829, -90.296453274), (-53.93777787, -92.41058445))
            ThreePointArc((-53.93777787, -92.41058445), (-75.660425587, -75.660425587), (-92.41058445, -53.93777787))
            ThreePointArc((-92.41058445, -53.93777787), (-88.845805045, -48.035642245), (-95.736430137, -47.786357306))
            ThreePointArc((-95.736430137, -47.786357306), (-107, 0), (-95.736430137, 47.786357306))
            ThreePointArc((-95.736430137, 47.786357306), (-88.845805045, 48.035642245), (-92.41058445, 53.93777787))
            ThreePointArc((-92.41058445, 53.93777787), (-75.660425587, 75.660425587), (-53.93777787, 92.41058445))
            ThreePointArc((-53.93777787, 92.41058445), (-46.514100829, 90.296453274), (-51.840445591, 95.883096534))
            ThreePointArc((-51.840445591, 95.883096534), (-109, 0), (-51.840445591, -95.883096534))
        make_face()
        with Locations((-49.938043918, -92.364450789)):
            Circle(SKETCH8_R, mode=Mode.SUBTRACT)
        with Locations((-92.364450789, -49.938043918)):
            Circle(SKETCH8_R, mode=Mode.SUBTRACT)
        with Locations((-92.364450789, 49.938043918)):
            Circle(SKETCH8_R, mode=Mode.SUBTRACT)
        with Locations((-49.938043918, 92.364450789)):
            Circle(SKETCH8_R, mode=Mode.SUBTRACT)
    extrude(amount=BOSS_EXTRUDE5_DEPTH)

    # Sketch9 → Cut-Extrude6 (cut)
    with BuildSketch(Plane.XY.offset(6.5).offset(CUT_EXTRUDE6_START)):
        with BuildLine():
            Line((-94.8934353, -48.324278959), (-95.736430137, -47.786357306))
            ThreePointArc((-95.736430137, -47.786357306), (-88.85683433, -48.01538254), (-92.364450789, -53.938043918))
            Line((-92.364450789, -53.938043918), (-92.364450789, -52.938043918))
            ThreePointArc((-92.364450789, -52.938043918), (-89.733738445, -48.496047884), (-94.8934353, -48.324278959))
        make_face()
        with BuildLine():
            Line((-52.938043918, -92.364450789), (-53.938043918, -92.364450789))
            ThreePointArc((-53.938043918, -92.364450789), (-48.407310189, -88.668932659), (-47.109616793, -95.192877914))
            Line((-47.109616793, -95.192877914), (-47.816723575, -94.485771133))
            ThreePointArc((-47.816723575, -94.485771133), (-48.789993621, -89.592812192), (-52.938043918, -92.364450789))
        make_face()
        with BuildLine():
            Line((-47.816723575, 94.485771133), (-47.109616793, 95.192877914))
            ThreePointArc((-47.109616793, 95.192877914), (-48.407310189, 88.668932659), (-53.938043918, 92.364450789))
            Line((-53.938043918, 92.364450789), (-52.938043918, 92.364450789))
            ThreePointArc((-52.938043918, 92.364450789), (-48.789993621, 89.592812192), (-47.816723575, 94.485771133))
        make_face()
        with BuildLine():
            Line((-92.364450789, 53.938043918), (-92.364450789, 52.938043918))
            ThreePointArc((-92.364450789, 52.938043918), (-89.733738445, 48.496047884), (-94.8934353, 48.324278959))
            Line((-94.8934353, 48.324278959), (-95.736430137, 47.786357306))
            ThreePointArc((-95.736430137, 47.786357306), (-88.85683433, 48.01538254), (-92.364450789, 53.938043918))
        make_face()
    extrude(amount=CUT_EXTRUDE6_DEPTH, mode=Mode.SUBTRACT)

    # Sketch10 → Cut-Extrude7 (cut)
    with BuildSketch(Plane(origin=(0, 0, 0), x_dir=(-1, 0, 0), z_dir=(0, 0, -1))):
        Circle(SKETCH10_R)
    extrude(amount=-CUT_EXTRUDE7_DEPTH, mode=Mode.SUBTRACT)

    # Fillet13
    fillet13_edges = [part.edges().sort_by_distance(p)[0] for p in [
        (-47.816723575, -94.485771133, 4),
        (-47.816723575, 94.485771133, 4),
    ]]
    fillet(fillet13_edges, radius=FILLET13_R)

    # Fillet14
    # the kernel refuses this fillet: 2 mm, written as the material it adds along each edge
    with BuildSketch(Plane(origin=(-52.938043918, 92.364450789, 1.5), x_dir=(0.19364916731417084, -0.9810708435166791, 0), z_dir=(0, 0, 1))) as fillet14_piece_1:
        with BuildLine():
            CenterArc((1.549193339, -1.962141687), FILLET14_R, 101.165822505, 49.458398129)
            Line((-0.193649167, -0.981070844), (-0.228506017, -0.961449427))
            ThreePointArc((-0.228506017, -0.961449427), (-0.136067417, -0.482789455), (-0.039242834, 0.007745967))
            Line((-0.039242834, 0.007745967), (0.007745967, 0.039242834))
            ThreePointArc((0.007745967, 0.039242834), (0.580947502, -0.016787469), (1.154149037, 0.039242834))
            Line((1.154149037, 0.039242834), (1.161895004, 0))
        make_face()
    extrude(amount=5)
    with BuildSketch(Plane(origin=(-92.364450789, 52.938043918, 1.5), x_dir=(0.9810708435182302, -0.19364916730631312, 0), z_dir=(0, 0, 1)), Plane(origin=(-94.8934353, -48.324278959, 1.5), x_dir=(0.6909844981380313, 0.7228695756033262, 0), z_dir=(0, 0, 1))) as fillet14_piece_2:
        with BuildLine():
            CenterArc((1.549193338, 1.962141687), FILLET14_R, 209.375779372, 49.458398123)
            Line((-0.193649167, 0.981070843), (-0.228506017, 0.961449427))
            ThreePointArc((-0.228506017, 0.961449427), (-0.136067417, 0.482789455), (-0.039242834, -0.007745967))
            Line((-0.039242834, -0.007745967), (0.007745967, -0.039242834))
            ThreePointArc((0.007745967, -0.039242834), (0.580947502, 0.016787469), (1.154149037, -0.039242834))
            Line((1.154149037, -0.039242834), (1.161895004, 0))
        make_face()
    extrude(amount=5)
    with BuildSketch(Plane(origin=(-94.8934353, 48.324278959, 1.5), x_dir=(-0.8429948368990979, -0.5379216531814491, 0), z_dir=(0, 0, 1))) as fillet14_piece_3:
        with BuildLine():
            CenterArc((1.625, 1.899835519), FILLET14_R, 202.331645004, 49.458398131)
            Line((-0.225, 1.139901312), (-0.262, 1.124702628))
            ThreePointArc((-0.262, 1.124702628), (-0.096030303, 0.573201535), (-0.04, 0))
            Line((-0.04, 0), (0, -0.04))
            ThreePointArc((0, -0.04), (0.5, -0.04), (0.9875, -0.03799671))
            Line((0.9875, -0.03799671), (1, 0))
        make_face()
    extrude(amount=5)
    with BuildSketch(Plane(origin=(-92.364450789, -52.938043918, 1.5), x_dir=(0, -1, 0), z_dir=(0, 0, 1))) as fillet14_piece_4:
        with BuildLine():
            CenterArc((1.625, 1.899835519), FILLET14_R, 202.331645009, 49.458398123)
            Line((-0.225, 1.139901311), (-0.262, 1.124702627))
            ThreePointArc((-0.262, 1.124702627), (-0.096030303, 0.573201535), (-0.04, 0))
            Line((-0.04, 0), (0, -0.04))
            ThreePointArc((0, -0.04), (0.5, -0.04), (0.9875, -0.03799671))
            Line((0.9875, -0.03799671), (1, 0))
        make_face()
    extrude(amount=5)
    with BuildSketch(Plane(origin=(-52.938043918, -92.364450789, 1.5), x_dir=(0.19364916731417084, 0.9810708435166791, 0), z_dir=(0, 0, 1))) as fillet14_piece_5:
        with BuildLine():
            CenterArc((1.549193339, 1.962141687), FILLET14_R, 209.375779366, 49.458398129)
            Line((-0.193649167, 0.981070844), (-0.228506017, 0.961449427))
            ThreePointArc((-0.228506017, 0.961449427), (-0.136067417, 0.482789455), (-0.039242834, -0.007745967))
            Line((-0.039242834, -0.007745967), (0.007745967, -0.039242834))
            ThreePointArc((0.007745967, -0.039242834), (0.580947502, 0.016787469), (1.154149037, -0.039242834))
            Line((1.154149037, -0.039242834), (1.161895004, 0))
        make_face()
    extrude(amount=5)

    # Sketch11 → Cut-Extrude10 (cut)
    with BuildSketch(Plane.XY.offset(6.5).offset(CUT_EXTRUDE10_START)):
        with BuildLine():
            Line((-88.364450789, 49.938043918), (9.82122629, 9.54949028))
            Line((9.82122629, 9.54949028), (-5.943869165, -97.504332158))
            Line((-5.943869165, -97.504332158), (-89.530841379, -105.956947326))
            Line((-89.530841379, -105.956947326), (-146.820788627, 13.944964128))
            Line((-146.820788627, 13.944964128), (-95.883096534, 51.840445591))
            ThreePointArc((-95.883096534, 51.840445591), (-93.345627894, 46.06024925), (-88.364450789, 49.938043918))
        make_face()
    extrude(amount=CUT_EXTRUDE10_DEPTH, mode=Mode.SUBTRACT)

    # Sketch12 → Boss-Extrude10 (add)
    with BuildSketch(Plane.XY.offset(6.5)):
        Polygon((-93.436498454, 53.93777787), (-92.410389265, 53.937973055), (-53.93777787, 92.41058445), (-56.617507196, 92.364450789), (-71.854770116, 80.829786623), (-85.355729389, 66.224878191), align=None)
    extrude(amount=-BOSS_EXTRUDE10_DEPTH)

    # Fillet15: read off the stored shape, not the designer's step
    # Fillet15 outline → Fillet15 (cut)
    with BuildSketch(Plane.XY.offset(FILLET15_START)):
        with BuildLine():
            ThreePointArc((-53.603687452, 92.219504205), (-53.771652019, 92.313436894), (-53.93777787, 92.41058445))
            ThreePointArc((-53.93777787, 92.41058445), (-53.937977406, 92.387518003), (-53.938043918, 92.364450789))
            ThreePointArc((-53.938043918, 92.364450789), (-53.767557444, 92.299608804), (-53.603687452, 92.219504205))
        make_face()
        with BuildLine():
            ThreePointArc((-92.41058445, 53.93777787), (-92.313436894, 53.77165202), (-92.219504205, 53.603687453))
            ThreePointArc((-92.219504205, 53.603687453), (-92.299608804, 53.767557444), (-92.364450789, 53.938043918))
            ThreePointArc((-92.364450789, 53.938043918), (-92.387518003, 53.937977406), (-92.41058445, 53.93777787))
        make_face()
    extrude(amount=FILLET15_DEPTH, mode=Mode.SUBTRACT)

    # Sketch13 → Cut-Extrude13 (cut)
    with BuildSketch(Plane.XY.offset(6.5).offset(CUT_EXTRUDE13_START)):
        with BuildLine():
            Line((-91.224549478, 52.713043918), (-52.713043918, 91.224549478))
            ThreePointArc((-52.713043918, 91.224549478), (-52.879536719, 92.954043956), (-52.059364262, 94.485771133))
            Line((-52.059364262, 94.485771133), (-94.485771133, 52.059364262))
            ThreePointArc((-94.485771133, 52.059364262), (-92.954043956, 52.879536719), (-91.224549478, 52.713043918))
        make_face()
    extrude(amount=CUT_EXTRUDE13_DEPTH, mode=Mode.SUBTRACT)

    # Fillet16
    fillet16_edges = [part.edges().sort_by_distance(p)[0] for p in [
        (-52.059364262, 94.485771133, 4),
    ]]
    fillet(fillet16_edges, radius=FILLET16_R)
    fillet16_2_edges = [part.edges().sort_by_distance(p)[0] for p in [
        (-94.485771133, 52.059364262, 4),
    ]]
    fillet(fillet16_2_edges, radius=FILLET16_R)

    # Sketch14 → Cut-Extrude14 (cut)
    with BuildSketch(Plane.XY.offset(6.5)):
        Circle(SKETCH14_R)
    extrude(amount=-CUT_EXTRUDE14_DEPTH, mode=Mode.SUBTRACT)


solid = part.part
